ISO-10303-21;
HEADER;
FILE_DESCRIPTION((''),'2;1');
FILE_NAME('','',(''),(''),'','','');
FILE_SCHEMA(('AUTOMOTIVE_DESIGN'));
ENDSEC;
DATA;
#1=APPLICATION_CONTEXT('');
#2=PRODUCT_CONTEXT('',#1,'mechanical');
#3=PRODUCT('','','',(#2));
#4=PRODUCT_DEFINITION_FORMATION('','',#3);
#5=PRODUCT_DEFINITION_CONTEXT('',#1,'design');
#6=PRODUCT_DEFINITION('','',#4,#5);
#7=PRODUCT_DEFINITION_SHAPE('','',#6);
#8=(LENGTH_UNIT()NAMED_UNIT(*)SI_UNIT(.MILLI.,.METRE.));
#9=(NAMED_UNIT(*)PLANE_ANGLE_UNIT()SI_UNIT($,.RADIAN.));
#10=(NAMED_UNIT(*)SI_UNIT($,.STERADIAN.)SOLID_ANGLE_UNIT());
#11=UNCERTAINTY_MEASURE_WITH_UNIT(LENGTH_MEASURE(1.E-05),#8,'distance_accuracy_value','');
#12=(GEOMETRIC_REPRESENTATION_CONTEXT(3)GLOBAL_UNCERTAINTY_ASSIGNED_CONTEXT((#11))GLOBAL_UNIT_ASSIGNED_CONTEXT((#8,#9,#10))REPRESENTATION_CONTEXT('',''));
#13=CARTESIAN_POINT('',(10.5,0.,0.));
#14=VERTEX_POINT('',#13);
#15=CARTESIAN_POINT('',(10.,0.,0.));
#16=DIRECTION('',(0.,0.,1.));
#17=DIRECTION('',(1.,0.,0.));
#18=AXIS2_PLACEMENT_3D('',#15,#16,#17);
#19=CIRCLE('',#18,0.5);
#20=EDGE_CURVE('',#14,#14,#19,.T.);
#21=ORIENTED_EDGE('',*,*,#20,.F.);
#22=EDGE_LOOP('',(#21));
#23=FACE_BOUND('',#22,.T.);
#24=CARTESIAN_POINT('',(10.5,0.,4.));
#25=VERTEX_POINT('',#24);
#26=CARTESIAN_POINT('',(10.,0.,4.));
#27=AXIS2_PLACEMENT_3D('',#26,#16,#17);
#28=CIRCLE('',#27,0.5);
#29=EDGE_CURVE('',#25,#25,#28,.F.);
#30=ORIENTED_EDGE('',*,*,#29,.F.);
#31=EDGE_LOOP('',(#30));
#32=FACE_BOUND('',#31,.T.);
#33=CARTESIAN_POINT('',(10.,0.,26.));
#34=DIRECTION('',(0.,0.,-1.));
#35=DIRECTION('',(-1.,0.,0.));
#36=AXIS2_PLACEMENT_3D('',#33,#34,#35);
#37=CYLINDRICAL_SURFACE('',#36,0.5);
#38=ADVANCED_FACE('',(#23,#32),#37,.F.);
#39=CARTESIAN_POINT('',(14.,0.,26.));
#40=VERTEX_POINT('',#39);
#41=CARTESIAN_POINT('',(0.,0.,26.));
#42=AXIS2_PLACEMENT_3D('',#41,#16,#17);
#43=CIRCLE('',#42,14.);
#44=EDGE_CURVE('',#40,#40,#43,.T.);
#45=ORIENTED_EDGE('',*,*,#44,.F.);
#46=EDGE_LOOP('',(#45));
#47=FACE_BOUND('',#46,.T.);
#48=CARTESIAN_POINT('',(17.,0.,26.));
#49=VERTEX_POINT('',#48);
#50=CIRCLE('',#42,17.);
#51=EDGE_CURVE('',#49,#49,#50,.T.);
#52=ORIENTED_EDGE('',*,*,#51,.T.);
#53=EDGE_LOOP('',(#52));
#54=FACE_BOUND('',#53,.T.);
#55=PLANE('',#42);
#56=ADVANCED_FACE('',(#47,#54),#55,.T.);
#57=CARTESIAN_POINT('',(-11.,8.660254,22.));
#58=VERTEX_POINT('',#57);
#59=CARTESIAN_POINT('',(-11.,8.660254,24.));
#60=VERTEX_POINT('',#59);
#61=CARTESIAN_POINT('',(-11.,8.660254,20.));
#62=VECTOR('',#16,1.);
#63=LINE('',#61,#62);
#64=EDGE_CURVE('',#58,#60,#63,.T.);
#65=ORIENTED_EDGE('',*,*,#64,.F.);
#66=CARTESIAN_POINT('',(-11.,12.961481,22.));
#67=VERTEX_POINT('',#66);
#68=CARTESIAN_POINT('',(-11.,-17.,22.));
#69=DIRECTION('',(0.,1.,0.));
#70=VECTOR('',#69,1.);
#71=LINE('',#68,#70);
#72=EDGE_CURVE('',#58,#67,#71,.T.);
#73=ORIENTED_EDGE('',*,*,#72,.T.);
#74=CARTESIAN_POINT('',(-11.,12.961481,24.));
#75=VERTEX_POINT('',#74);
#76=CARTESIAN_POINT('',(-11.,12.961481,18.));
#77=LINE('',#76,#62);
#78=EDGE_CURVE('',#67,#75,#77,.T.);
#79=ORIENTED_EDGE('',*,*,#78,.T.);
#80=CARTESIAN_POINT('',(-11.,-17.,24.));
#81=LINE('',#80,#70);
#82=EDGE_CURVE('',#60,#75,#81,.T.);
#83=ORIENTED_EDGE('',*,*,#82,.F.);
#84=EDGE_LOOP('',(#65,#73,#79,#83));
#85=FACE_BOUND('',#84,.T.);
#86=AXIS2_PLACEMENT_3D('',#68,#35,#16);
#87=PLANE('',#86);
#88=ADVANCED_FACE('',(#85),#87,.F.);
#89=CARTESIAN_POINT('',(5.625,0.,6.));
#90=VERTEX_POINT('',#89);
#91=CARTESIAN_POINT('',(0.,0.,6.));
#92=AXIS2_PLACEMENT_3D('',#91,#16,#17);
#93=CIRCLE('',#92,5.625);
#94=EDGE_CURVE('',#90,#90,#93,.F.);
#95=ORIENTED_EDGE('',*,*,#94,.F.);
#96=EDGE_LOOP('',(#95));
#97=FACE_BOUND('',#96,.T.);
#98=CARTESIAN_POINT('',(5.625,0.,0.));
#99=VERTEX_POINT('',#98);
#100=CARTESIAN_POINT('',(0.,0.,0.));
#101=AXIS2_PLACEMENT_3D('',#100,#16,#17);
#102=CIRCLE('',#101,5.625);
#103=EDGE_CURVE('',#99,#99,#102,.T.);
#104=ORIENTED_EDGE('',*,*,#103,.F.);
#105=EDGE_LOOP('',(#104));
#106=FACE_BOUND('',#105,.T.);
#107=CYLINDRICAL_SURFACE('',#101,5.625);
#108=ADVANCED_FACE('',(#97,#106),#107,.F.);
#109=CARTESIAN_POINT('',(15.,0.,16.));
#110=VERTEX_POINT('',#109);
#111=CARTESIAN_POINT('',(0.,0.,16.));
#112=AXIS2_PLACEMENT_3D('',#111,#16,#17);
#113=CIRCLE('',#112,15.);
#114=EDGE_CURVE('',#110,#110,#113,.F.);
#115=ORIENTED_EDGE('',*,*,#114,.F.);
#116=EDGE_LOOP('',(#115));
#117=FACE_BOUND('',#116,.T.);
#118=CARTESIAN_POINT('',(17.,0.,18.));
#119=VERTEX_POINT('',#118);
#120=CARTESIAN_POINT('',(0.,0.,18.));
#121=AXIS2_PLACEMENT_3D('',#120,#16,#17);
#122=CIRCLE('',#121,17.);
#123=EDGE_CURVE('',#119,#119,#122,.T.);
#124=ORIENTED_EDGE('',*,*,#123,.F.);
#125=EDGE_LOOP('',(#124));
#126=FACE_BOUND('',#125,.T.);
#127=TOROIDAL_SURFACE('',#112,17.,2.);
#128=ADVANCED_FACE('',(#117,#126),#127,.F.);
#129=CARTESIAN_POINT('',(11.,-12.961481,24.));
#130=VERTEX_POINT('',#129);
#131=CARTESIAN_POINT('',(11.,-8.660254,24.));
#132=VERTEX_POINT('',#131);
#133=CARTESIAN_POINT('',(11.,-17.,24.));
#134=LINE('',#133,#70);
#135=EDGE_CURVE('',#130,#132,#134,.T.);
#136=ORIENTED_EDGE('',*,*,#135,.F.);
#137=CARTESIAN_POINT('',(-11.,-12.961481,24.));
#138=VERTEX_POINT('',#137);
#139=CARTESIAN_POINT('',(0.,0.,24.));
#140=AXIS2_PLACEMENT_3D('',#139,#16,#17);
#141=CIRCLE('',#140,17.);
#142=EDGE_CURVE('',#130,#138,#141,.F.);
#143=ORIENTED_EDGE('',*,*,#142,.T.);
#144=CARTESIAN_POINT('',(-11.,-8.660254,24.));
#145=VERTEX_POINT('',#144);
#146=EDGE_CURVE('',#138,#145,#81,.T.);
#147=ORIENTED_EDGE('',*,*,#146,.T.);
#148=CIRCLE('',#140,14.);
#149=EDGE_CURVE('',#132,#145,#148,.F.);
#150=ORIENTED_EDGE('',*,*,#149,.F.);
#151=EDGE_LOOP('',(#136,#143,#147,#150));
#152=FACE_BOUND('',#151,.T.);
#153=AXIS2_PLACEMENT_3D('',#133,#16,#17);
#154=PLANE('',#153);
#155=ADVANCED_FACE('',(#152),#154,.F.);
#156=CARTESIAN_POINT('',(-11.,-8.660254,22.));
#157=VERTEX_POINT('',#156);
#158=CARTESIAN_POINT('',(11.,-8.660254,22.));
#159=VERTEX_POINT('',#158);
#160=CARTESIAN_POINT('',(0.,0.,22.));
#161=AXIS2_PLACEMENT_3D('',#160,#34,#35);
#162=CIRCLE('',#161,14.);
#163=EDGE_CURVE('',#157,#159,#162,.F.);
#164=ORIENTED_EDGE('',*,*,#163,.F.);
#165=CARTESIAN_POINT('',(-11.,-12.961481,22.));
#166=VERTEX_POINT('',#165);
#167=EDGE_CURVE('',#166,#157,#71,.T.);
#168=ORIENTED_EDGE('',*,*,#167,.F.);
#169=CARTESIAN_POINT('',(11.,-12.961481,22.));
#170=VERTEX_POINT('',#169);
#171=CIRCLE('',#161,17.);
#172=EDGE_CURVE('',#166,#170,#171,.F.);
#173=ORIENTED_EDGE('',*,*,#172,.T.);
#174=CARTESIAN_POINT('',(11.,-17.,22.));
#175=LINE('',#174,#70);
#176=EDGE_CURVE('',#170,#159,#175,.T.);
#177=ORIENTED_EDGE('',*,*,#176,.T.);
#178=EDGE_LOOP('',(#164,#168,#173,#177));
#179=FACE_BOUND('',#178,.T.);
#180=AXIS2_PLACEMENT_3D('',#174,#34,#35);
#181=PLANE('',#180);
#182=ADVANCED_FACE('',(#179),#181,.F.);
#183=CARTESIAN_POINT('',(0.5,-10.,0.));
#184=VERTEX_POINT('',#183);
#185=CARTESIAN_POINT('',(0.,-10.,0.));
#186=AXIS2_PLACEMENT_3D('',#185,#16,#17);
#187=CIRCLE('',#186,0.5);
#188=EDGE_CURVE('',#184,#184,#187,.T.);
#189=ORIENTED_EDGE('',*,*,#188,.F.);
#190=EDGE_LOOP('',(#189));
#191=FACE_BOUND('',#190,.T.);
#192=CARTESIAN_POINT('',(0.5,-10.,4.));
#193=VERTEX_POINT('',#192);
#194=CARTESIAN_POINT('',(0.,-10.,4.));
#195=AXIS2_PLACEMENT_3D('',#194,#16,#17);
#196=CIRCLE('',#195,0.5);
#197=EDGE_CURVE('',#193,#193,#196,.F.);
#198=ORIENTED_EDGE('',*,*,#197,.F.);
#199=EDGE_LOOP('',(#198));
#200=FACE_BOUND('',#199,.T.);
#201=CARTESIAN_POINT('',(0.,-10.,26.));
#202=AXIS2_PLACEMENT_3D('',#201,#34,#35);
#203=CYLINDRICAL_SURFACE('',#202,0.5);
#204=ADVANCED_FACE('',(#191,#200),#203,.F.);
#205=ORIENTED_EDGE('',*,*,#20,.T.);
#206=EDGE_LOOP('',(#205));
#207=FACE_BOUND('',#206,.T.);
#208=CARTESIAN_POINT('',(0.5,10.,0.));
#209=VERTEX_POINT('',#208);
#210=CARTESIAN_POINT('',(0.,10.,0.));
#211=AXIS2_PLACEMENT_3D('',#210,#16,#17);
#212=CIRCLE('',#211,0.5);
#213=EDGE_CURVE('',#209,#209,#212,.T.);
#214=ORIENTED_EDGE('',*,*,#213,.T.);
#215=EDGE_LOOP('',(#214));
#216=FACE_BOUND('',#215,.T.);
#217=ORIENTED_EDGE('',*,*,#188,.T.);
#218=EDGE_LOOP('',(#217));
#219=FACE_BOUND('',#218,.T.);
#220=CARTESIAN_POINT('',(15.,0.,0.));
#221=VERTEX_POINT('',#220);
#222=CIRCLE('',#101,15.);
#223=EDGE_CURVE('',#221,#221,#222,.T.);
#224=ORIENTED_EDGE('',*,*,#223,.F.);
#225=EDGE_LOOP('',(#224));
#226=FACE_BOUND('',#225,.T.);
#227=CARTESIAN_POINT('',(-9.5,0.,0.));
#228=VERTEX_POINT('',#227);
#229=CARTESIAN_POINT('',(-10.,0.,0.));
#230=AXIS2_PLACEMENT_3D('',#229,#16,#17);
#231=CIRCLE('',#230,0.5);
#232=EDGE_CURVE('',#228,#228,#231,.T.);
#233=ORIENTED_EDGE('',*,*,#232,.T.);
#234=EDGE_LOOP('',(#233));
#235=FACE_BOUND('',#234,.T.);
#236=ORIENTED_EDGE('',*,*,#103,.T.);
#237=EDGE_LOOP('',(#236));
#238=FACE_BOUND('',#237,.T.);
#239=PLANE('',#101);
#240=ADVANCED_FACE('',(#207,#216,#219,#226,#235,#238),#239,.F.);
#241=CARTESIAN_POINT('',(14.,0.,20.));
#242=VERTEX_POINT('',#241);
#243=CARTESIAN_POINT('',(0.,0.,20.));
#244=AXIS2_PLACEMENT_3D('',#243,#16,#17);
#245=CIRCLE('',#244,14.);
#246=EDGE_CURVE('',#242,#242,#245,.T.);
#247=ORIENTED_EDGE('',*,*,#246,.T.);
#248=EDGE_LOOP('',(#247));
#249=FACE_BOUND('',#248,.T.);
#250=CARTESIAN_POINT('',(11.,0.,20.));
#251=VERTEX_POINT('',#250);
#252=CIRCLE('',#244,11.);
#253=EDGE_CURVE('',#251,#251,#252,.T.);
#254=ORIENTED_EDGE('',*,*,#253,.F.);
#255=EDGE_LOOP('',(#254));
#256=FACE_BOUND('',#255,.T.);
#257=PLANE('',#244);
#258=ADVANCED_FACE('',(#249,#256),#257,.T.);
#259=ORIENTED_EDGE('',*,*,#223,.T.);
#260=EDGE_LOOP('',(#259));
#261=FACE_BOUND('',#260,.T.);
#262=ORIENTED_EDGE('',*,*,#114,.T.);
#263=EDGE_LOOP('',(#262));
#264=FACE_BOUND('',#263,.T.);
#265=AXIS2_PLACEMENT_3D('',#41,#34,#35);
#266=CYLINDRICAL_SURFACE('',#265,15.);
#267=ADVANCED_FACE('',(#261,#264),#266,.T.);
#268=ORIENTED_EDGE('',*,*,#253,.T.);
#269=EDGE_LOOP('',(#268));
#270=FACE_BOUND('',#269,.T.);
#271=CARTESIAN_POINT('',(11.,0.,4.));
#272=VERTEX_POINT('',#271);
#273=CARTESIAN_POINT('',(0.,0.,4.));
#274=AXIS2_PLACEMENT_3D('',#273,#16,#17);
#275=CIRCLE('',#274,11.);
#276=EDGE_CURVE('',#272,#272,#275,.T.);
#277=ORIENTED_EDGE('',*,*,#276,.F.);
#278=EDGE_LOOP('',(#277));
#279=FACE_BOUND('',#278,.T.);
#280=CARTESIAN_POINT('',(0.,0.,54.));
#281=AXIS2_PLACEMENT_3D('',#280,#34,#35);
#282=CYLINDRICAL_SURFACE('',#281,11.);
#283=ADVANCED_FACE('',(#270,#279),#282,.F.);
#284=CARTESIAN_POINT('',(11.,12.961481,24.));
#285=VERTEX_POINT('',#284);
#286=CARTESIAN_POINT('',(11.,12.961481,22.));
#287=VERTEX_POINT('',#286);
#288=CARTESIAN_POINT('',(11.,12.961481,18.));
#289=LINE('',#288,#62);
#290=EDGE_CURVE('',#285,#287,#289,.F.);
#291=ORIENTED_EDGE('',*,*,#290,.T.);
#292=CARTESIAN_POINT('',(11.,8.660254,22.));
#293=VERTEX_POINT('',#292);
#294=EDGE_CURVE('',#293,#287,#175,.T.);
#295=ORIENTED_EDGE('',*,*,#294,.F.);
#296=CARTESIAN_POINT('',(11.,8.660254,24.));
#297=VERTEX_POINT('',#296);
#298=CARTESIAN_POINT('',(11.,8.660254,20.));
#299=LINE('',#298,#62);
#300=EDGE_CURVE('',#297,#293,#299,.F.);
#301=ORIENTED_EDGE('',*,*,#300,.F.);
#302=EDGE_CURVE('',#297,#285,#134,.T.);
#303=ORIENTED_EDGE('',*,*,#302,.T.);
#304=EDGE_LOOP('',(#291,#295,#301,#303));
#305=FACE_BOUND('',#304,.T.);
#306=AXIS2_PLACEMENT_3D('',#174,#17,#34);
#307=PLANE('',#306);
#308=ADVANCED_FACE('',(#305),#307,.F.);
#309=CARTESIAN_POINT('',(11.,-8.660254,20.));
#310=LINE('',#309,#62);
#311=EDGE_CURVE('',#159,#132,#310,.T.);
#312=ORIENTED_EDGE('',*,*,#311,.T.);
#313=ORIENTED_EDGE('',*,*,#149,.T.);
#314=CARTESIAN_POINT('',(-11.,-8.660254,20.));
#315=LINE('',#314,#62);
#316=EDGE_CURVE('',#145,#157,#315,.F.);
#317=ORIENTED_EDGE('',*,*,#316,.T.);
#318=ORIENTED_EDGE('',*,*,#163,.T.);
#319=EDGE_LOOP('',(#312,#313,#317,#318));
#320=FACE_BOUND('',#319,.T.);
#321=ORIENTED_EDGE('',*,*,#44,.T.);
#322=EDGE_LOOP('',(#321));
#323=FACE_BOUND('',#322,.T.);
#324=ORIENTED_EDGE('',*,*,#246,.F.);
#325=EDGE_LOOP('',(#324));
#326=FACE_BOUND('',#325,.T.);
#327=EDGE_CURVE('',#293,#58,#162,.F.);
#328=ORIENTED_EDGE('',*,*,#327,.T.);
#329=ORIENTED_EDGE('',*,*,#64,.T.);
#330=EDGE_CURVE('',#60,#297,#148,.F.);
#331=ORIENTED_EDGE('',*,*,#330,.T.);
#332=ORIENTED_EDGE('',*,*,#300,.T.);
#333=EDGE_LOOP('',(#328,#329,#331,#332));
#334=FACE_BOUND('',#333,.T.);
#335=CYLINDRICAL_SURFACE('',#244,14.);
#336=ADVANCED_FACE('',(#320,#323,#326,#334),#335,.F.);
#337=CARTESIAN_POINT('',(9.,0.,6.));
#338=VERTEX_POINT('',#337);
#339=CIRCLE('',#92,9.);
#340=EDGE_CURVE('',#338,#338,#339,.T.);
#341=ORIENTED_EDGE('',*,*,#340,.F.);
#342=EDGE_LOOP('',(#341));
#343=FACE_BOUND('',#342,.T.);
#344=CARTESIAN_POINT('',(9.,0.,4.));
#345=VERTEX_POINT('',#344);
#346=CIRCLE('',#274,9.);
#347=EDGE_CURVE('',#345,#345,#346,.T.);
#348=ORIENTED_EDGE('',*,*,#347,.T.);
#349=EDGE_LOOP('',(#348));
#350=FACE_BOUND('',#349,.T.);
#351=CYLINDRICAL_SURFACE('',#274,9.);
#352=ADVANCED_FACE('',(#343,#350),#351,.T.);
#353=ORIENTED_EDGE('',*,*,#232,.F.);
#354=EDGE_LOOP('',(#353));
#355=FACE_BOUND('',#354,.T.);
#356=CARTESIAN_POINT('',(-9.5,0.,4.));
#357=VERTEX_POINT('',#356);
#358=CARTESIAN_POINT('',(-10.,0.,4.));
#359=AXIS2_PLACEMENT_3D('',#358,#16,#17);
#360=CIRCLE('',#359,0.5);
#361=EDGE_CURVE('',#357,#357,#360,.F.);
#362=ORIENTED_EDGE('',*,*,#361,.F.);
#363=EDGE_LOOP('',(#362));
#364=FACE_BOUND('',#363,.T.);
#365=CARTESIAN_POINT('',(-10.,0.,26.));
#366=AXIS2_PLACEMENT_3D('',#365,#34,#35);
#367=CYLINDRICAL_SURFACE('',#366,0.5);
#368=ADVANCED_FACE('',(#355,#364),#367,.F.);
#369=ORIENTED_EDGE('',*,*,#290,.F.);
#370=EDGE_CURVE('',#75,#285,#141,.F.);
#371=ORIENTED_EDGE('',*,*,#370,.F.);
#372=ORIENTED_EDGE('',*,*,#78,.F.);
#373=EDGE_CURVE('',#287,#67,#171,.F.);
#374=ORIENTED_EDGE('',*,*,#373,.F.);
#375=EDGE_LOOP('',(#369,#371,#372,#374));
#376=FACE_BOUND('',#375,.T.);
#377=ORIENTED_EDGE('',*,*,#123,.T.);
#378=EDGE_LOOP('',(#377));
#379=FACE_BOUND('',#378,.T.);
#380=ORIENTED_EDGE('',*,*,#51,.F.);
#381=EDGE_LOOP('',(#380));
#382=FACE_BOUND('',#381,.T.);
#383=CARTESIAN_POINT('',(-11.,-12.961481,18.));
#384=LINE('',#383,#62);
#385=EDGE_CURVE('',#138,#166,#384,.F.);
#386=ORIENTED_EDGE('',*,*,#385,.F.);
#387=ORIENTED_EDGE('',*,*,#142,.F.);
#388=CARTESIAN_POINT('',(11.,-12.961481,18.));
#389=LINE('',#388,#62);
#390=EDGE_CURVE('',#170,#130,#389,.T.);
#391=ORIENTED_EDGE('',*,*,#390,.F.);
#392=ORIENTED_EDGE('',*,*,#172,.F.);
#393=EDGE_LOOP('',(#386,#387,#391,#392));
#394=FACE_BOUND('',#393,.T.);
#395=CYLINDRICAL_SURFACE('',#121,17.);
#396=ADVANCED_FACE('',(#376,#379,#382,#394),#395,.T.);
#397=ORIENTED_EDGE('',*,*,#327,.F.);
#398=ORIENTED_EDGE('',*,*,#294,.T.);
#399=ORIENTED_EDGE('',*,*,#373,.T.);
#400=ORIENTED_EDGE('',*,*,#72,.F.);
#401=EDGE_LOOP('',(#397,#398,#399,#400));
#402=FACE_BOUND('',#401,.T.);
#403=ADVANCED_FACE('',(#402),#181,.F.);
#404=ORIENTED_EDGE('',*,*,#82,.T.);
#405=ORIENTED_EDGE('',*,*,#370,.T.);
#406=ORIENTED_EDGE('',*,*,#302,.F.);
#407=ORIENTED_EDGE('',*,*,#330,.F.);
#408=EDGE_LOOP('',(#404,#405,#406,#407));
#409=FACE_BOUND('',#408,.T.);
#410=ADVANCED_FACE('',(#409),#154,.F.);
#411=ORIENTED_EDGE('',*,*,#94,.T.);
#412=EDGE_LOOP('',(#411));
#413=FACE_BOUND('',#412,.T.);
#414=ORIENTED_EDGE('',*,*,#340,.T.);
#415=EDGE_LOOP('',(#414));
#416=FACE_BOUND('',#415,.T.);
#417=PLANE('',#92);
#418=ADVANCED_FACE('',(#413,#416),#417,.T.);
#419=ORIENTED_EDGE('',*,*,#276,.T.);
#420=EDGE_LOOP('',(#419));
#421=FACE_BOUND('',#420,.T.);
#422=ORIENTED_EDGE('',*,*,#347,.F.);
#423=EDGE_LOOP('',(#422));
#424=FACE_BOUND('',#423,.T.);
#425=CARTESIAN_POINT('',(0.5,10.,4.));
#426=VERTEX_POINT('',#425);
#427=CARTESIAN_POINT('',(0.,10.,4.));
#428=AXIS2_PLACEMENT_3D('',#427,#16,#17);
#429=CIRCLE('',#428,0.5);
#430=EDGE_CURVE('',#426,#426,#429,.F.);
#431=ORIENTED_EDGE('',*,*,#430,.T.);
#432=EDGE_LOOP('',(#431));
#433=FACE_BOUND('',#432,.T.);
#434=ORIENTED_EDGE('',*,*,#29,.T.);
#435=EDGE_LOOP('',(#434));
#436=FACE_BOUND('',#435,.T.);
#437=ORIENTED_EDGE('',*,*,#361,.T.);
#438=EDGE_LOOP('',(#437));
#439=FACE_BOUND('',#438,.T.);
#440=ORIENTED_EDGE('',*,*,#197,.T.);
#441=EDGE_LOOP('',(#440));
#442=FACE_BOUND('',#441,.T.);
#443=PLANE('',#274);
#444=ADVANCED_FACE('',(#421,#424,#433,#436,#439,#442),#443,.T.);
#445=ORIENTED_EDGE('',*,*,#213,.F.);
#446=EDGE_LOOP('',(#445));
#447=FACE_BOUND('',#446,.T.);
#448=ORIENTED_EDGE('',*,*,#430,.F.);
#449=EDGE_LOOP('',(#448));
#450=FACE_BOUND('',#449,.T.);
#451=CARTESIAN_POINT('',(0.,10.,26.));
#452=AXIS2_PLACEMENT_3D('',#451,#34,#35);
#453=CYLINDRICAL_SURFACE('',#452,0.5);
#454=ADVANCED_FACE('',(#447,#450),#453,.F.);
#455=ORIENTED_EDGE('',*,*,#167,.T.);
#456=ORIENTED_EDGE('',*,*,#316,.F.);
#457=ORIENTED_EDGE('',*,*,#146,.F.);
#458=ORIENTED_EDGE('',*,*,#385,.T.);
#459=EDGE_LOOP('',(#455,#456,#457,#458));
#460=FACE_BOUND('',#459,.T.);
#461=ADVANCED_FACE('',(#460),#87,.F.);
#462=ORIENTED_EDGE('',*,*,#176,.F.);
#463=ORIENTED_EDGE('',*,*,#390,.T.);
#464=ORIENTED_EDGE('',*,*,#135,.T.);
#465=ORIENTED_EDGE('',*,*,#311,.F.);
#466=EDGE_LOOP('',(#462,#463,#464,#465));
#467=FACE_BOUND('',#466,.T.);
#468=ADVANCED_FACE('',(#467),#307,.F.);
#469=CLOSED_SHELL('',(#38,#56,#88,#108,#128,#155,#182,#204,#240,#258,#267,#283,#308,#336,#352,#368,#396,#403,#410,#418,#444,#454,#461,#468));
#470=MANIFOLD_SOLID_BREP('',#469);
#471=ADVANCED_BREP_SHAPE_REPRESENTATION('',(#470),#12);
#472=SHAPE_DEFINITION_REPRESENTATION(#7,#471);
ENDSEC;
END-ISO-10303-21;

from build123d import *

# Parameters (mm, degrees)
SKETCH1_R                = 15
BOSS_EXTRUDE5_DEPTH      = 26
SKETCH3_R                = 5.625
CUT_EXTRUDE2_DEPTH       = 34.555923471
CUT_EXTRUDE3_DEPTH       = 28
CUT_EXTRUDE3_DEPTH_BACK  = 20
SKETCH4_R                = 11
CUT_EXTRUDE6_START       = 6
SKETCH7_R                = 11
SKETCH7_R_2              = 9
CUT_EXTRUDE6_DEPTH       = 2
BOSS_EXTRUDE8_DEPTH      = 6
BOSS_EXTRUDE8_DEPTH_BACK = 2
BOSS_EXTRUDE8_START      = 20
SKETCH12_R               = 17
CUT_EXTRUDE10_START      = 18
SKETCH13_R               = 11
CUT_EXTRUDE10_DEPTH      = 18.411862419
FILLET2_R                = 2
CUT_EXTRUDE11_START      = 26
SKETCH14_R               = 14
CUT_EXTRUDE11_DEPTH      = 6
SKETCH15_R               = 0.5
CUT_EXTRUDE14_DEPTH      = 36.411862419
CUT_EXTRUDE15_DEPTH      = 36.411862419
CUT_EXTRUDE15_DEPTH_BACK = 36.411862419
SKETCH18_W               = 22
SKETCH18_H               = 2


with BuildPart() as part:
    # Sketch1 → Boss-Extrude5 (new body)
    with BuildSketch(Plane.XY):
        Circle(SKETCH1_R)
    extrude(amount=BOSS_EXTRUDE5_DEPTH)

    # Sketch3 → Cut-Extrude2 (cut, through all)
    with BuildSketch(Plane.XY.offset(26)):
        Circle(SKETCH3_R)
    extrude(amount=-CUT_EXTRUDE2_DEPTH, mode=Mode.SUBTRACT)

    # Sketch4 → Cut-Extrude3 (cut, two sides: drawn at the far end of the back side and taken through both)
    with BuildSketch(Plane.XY.offset(26).offset(-CUT_EXTRUDE3_DEPTH_BACK)):
        Circle(SKETCH4_R)
    extrude(amount=CUT_EXTRUDE3_DEPTH + CUT_EXTRUDE3_DEPTH_BACK, mode=Mode.SUBTRACT)

    # Sketch7 → Cut-Extrude6 (cut)
    with BuildSketch(Plane.XY.offset(CUT_EXTRUDE6_START)):
        Circle(SKETCH7_R)
        Circle(SKETCH7_R_2, mode=Mode.SUBTRACT)
    extrude(amount=-CUT_EXTRUDE6_DEPTH, mode=Mode.SUBTRACT)

    # Sketch12 → Boss-Extrude8 (add, two sides: drawn at the far end of the back side and taken through both)
    with BuildSketch(Plane.XY.offset(BOSS_EXTRUDE8_START - BOSS_EXTRUDE8_DEPTH_BACK)):
        Circle(SKETCH12_R)
    extrude(amount=BOSS_EXTRUDE8_DEPTH + BOSS_EXTRUDE8_DEPTH_BACK)

    # Sketch13 → Cut-Extrude10 (cut, through all)
    with BuildSketch(Plane.XY.offset(CUT_EXTRUDE10_START)):
        Circle(SKETCH13_R)
    extrude(amount=CUT_EXTRUDE10_DEPTH, mode=Mode.SUBTRACT)

    # Fillet2
    fillet2_edges = [part.edges().sort_by_distance(p)[0] for p in [
        (-15, 0, 18),
    ]]
    fillet(fillet2_edges, radius=FILLET2_R - 0.0001)  # a hair under: the kernel refuses the full size

    # Sketch14 → Cut-Extrude11 (cut)
    with BuildSketch(Plane.XY.offset(CUT_EXTRUDE11_START)):
        Circle(SKETCH14_R)
    extrude(amount=-CUT_EXTRUDE11_DEPTH, mode=Mode.SUBTRACT)

    # Sketch15 → Cut-Extrude14 (cut, through all)
    with BuildSketch(Plane.XY):
        with Locations((0, 10)):
            Circle(SKETCH15_R)
        with Locations((0, -10)):
            Circle(SKETCH15_R)
        with Locations((10, 0)):
            Circle(SKETCH15_R)
        with Locations((-10, 0)):
            Circle(SKETCH15_R)
    extrude(amount=CUT_EXTRUDE14_DEPTH, mode=Mode.SUBTRACT)

    # Sketch18 → Cut-Extrude15 (cut, two sides: drawn at the far end of the back side and taken through both)
    with BuildSketch(Plane(origin=(0, 0, 0), x_dir=(1, 0, 0), z_dir=(0, 1, 0)).offset(-CUT_EXTRUDE15_DEPTH_BACK)):
        with Locations((0, -23)):
            Rectangle(SKETCH18_W, SKETCH18_H)
    extrude(amount=CUT_EXTRUDE15_DEPTH + CUT_EXTRUDE15_DEPTH_BACK, mode=Mode.SUBTRACT)


solid = part.part
